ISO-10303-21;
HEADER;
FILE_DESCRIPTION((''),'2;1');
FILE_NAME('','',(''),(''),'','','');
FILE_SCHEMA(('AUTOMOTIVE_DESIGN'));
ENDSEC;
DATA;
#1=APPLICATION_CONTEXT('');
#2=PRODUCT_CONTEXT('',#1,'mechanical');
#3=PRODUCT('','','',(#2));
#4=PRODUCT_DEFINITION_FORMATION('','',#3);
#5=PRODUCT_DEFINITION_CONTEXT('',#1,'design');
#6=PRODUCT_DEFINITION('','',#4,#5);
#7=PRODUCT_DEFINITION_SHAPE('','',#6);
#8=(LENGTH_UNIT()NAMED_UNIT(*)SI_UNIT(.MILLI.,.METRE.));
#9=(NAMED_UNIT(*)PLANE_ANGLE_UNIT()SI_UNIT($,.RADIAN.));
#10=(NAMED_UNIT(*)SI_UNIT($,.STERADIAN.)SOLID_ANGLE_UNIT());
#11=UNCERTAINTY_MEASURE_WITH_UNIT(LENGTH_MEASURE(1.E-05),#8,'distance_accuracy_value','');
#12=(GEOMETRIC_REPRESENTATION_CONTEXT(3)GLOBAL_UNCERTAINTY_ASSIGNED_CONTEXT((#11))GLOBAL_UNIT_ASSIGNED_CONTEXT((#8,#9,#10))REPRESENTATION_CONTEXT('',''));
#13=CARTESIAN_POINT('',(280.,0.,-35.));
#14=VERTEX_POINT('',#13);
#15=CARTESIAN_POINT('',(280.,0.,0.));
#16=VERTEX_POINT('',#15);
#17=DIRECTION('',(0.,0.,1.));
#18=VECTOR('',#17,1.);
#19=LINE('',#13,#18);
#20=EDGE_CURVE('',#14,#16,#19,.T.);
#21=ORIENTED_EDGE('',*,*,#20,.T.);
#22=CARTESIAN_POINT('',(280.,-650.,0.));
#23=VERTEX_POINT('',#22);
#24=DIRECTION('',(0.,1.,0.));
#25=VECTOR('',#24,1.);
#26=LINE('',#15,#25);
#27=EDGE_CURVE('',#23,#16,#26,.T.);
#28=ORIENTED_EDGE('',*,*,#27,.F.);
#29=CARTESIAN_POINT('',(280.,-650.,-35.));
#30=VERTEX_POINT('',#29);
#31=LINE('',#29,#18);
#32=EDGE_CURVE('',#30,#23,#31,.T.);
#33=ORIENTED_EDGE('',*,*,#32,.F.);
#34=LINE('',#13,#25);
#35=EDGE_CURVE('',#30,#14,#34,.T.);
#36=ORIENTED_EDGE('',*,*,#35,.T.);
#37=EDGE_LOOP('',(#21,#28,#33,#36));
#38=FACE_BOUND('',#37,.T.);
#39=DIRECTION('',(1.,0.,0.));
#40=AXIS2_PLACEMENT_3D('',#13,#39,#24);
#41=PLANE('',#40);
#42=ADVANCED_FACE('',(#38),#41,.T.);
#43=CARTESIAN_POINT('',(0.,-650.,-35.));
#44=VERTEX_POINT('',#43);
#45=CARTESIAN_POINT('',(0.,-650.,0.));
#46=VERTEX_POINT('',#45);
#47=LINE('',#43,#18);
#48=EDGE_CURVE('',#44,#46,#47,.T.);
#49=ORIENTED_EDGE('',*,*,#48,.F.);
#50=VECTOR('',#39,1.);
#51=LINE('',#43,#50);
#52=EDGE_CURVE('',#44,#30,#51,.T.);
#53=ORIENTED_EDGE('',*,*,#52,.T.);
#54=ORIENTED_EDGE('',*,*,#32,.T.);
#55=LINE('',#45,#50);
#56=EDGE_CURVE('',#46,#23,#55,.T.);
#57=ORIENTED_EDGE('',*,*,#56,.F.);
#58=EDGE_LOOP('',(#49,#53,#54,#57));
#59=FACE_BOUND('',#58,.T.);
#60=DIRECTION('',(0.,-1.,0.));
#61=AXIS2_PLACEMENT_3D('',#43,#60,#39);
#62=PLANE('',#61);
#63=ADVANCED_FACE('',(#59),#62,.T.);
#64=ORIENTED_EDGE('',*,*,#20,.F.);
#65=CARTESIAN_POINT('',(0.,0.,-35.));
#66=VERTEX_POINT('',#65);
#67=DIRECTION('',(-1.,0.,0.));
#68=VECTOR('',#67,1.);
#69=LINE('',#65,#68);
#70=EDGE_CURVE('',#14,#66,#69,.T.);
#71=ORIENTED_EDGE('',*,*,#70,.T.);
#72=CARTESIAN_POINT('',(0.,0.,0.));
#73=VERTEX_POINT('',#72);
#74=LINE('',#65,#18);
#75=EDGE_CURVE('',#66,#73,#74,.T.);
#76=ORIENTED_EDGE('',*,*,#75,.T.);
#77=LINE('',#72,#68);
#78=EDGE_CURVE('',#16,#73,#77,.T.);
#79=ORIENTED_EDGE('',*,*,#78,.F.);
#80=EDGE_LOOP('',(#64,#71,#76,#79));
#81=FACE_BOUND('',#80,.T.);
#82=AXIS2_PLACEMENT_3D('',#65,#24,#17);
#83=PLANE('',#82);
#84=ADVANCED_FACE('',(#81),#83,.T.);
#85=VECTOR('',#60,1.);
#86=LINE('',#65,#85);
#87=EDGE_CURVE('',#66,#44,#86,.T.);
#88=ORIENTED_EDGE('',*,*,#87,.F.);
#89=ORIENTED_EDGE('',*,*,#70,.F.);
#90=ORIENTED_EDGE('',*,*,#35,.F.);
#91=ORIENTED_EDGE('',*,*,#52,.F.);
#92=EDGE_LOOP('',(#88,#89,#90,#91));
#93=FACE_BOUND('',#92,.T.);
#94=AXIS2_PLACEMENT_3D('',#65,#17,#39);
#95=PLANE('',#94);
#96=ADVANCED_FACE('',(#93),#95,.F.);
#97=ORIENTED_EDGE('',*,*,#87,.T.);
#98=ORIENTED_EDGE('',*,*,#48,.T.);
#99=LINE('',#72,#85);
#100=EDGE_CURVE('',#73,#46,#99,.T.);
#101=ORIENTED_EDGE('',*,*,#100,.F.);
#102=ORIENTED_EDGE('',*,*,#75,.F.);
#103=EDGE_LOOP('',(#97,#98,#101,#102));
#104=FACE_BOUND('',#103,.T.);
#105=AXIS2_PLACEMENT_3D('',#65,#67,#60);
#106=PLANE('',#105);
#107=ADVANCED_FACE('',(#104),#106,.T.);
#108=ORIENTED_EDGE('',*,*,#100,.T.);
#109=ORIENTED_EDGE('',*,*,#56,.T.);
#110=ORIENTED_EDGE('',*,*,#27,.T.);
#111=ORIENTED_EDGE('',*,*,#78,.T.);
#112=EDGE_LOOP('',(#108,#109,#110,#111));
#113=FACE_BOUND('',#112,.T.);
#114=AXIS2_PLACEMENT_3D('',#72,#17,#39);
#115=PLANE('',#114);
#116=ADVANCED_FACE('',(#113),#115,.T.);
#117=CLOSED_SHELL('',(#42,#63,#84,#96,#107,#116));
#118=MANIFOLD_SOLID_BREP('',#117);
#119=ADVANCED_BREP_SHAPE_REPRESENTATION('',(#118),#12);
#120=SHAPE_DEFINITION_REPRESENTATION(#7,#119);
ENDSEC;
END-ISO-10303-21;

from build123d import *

# Parameters (mm, degrees)
IZIM1_W            = 280
IZIM1_H            = 650
TABAN_FLAN_1_DEPTH = 35


# Sheet-metal steps are written as plain solids
with BuildPart() as part:
    # Çizim1 → Taban-Flanş1 (new body)
    with BuildSketch(Plane.XY):
        with Locations((140, -325)):
            Rectangle(IZIM1_W, IZIM1_H)
    extrude(amount=-TABAN_FLAN_1_DEPTH)


solid = part.part
